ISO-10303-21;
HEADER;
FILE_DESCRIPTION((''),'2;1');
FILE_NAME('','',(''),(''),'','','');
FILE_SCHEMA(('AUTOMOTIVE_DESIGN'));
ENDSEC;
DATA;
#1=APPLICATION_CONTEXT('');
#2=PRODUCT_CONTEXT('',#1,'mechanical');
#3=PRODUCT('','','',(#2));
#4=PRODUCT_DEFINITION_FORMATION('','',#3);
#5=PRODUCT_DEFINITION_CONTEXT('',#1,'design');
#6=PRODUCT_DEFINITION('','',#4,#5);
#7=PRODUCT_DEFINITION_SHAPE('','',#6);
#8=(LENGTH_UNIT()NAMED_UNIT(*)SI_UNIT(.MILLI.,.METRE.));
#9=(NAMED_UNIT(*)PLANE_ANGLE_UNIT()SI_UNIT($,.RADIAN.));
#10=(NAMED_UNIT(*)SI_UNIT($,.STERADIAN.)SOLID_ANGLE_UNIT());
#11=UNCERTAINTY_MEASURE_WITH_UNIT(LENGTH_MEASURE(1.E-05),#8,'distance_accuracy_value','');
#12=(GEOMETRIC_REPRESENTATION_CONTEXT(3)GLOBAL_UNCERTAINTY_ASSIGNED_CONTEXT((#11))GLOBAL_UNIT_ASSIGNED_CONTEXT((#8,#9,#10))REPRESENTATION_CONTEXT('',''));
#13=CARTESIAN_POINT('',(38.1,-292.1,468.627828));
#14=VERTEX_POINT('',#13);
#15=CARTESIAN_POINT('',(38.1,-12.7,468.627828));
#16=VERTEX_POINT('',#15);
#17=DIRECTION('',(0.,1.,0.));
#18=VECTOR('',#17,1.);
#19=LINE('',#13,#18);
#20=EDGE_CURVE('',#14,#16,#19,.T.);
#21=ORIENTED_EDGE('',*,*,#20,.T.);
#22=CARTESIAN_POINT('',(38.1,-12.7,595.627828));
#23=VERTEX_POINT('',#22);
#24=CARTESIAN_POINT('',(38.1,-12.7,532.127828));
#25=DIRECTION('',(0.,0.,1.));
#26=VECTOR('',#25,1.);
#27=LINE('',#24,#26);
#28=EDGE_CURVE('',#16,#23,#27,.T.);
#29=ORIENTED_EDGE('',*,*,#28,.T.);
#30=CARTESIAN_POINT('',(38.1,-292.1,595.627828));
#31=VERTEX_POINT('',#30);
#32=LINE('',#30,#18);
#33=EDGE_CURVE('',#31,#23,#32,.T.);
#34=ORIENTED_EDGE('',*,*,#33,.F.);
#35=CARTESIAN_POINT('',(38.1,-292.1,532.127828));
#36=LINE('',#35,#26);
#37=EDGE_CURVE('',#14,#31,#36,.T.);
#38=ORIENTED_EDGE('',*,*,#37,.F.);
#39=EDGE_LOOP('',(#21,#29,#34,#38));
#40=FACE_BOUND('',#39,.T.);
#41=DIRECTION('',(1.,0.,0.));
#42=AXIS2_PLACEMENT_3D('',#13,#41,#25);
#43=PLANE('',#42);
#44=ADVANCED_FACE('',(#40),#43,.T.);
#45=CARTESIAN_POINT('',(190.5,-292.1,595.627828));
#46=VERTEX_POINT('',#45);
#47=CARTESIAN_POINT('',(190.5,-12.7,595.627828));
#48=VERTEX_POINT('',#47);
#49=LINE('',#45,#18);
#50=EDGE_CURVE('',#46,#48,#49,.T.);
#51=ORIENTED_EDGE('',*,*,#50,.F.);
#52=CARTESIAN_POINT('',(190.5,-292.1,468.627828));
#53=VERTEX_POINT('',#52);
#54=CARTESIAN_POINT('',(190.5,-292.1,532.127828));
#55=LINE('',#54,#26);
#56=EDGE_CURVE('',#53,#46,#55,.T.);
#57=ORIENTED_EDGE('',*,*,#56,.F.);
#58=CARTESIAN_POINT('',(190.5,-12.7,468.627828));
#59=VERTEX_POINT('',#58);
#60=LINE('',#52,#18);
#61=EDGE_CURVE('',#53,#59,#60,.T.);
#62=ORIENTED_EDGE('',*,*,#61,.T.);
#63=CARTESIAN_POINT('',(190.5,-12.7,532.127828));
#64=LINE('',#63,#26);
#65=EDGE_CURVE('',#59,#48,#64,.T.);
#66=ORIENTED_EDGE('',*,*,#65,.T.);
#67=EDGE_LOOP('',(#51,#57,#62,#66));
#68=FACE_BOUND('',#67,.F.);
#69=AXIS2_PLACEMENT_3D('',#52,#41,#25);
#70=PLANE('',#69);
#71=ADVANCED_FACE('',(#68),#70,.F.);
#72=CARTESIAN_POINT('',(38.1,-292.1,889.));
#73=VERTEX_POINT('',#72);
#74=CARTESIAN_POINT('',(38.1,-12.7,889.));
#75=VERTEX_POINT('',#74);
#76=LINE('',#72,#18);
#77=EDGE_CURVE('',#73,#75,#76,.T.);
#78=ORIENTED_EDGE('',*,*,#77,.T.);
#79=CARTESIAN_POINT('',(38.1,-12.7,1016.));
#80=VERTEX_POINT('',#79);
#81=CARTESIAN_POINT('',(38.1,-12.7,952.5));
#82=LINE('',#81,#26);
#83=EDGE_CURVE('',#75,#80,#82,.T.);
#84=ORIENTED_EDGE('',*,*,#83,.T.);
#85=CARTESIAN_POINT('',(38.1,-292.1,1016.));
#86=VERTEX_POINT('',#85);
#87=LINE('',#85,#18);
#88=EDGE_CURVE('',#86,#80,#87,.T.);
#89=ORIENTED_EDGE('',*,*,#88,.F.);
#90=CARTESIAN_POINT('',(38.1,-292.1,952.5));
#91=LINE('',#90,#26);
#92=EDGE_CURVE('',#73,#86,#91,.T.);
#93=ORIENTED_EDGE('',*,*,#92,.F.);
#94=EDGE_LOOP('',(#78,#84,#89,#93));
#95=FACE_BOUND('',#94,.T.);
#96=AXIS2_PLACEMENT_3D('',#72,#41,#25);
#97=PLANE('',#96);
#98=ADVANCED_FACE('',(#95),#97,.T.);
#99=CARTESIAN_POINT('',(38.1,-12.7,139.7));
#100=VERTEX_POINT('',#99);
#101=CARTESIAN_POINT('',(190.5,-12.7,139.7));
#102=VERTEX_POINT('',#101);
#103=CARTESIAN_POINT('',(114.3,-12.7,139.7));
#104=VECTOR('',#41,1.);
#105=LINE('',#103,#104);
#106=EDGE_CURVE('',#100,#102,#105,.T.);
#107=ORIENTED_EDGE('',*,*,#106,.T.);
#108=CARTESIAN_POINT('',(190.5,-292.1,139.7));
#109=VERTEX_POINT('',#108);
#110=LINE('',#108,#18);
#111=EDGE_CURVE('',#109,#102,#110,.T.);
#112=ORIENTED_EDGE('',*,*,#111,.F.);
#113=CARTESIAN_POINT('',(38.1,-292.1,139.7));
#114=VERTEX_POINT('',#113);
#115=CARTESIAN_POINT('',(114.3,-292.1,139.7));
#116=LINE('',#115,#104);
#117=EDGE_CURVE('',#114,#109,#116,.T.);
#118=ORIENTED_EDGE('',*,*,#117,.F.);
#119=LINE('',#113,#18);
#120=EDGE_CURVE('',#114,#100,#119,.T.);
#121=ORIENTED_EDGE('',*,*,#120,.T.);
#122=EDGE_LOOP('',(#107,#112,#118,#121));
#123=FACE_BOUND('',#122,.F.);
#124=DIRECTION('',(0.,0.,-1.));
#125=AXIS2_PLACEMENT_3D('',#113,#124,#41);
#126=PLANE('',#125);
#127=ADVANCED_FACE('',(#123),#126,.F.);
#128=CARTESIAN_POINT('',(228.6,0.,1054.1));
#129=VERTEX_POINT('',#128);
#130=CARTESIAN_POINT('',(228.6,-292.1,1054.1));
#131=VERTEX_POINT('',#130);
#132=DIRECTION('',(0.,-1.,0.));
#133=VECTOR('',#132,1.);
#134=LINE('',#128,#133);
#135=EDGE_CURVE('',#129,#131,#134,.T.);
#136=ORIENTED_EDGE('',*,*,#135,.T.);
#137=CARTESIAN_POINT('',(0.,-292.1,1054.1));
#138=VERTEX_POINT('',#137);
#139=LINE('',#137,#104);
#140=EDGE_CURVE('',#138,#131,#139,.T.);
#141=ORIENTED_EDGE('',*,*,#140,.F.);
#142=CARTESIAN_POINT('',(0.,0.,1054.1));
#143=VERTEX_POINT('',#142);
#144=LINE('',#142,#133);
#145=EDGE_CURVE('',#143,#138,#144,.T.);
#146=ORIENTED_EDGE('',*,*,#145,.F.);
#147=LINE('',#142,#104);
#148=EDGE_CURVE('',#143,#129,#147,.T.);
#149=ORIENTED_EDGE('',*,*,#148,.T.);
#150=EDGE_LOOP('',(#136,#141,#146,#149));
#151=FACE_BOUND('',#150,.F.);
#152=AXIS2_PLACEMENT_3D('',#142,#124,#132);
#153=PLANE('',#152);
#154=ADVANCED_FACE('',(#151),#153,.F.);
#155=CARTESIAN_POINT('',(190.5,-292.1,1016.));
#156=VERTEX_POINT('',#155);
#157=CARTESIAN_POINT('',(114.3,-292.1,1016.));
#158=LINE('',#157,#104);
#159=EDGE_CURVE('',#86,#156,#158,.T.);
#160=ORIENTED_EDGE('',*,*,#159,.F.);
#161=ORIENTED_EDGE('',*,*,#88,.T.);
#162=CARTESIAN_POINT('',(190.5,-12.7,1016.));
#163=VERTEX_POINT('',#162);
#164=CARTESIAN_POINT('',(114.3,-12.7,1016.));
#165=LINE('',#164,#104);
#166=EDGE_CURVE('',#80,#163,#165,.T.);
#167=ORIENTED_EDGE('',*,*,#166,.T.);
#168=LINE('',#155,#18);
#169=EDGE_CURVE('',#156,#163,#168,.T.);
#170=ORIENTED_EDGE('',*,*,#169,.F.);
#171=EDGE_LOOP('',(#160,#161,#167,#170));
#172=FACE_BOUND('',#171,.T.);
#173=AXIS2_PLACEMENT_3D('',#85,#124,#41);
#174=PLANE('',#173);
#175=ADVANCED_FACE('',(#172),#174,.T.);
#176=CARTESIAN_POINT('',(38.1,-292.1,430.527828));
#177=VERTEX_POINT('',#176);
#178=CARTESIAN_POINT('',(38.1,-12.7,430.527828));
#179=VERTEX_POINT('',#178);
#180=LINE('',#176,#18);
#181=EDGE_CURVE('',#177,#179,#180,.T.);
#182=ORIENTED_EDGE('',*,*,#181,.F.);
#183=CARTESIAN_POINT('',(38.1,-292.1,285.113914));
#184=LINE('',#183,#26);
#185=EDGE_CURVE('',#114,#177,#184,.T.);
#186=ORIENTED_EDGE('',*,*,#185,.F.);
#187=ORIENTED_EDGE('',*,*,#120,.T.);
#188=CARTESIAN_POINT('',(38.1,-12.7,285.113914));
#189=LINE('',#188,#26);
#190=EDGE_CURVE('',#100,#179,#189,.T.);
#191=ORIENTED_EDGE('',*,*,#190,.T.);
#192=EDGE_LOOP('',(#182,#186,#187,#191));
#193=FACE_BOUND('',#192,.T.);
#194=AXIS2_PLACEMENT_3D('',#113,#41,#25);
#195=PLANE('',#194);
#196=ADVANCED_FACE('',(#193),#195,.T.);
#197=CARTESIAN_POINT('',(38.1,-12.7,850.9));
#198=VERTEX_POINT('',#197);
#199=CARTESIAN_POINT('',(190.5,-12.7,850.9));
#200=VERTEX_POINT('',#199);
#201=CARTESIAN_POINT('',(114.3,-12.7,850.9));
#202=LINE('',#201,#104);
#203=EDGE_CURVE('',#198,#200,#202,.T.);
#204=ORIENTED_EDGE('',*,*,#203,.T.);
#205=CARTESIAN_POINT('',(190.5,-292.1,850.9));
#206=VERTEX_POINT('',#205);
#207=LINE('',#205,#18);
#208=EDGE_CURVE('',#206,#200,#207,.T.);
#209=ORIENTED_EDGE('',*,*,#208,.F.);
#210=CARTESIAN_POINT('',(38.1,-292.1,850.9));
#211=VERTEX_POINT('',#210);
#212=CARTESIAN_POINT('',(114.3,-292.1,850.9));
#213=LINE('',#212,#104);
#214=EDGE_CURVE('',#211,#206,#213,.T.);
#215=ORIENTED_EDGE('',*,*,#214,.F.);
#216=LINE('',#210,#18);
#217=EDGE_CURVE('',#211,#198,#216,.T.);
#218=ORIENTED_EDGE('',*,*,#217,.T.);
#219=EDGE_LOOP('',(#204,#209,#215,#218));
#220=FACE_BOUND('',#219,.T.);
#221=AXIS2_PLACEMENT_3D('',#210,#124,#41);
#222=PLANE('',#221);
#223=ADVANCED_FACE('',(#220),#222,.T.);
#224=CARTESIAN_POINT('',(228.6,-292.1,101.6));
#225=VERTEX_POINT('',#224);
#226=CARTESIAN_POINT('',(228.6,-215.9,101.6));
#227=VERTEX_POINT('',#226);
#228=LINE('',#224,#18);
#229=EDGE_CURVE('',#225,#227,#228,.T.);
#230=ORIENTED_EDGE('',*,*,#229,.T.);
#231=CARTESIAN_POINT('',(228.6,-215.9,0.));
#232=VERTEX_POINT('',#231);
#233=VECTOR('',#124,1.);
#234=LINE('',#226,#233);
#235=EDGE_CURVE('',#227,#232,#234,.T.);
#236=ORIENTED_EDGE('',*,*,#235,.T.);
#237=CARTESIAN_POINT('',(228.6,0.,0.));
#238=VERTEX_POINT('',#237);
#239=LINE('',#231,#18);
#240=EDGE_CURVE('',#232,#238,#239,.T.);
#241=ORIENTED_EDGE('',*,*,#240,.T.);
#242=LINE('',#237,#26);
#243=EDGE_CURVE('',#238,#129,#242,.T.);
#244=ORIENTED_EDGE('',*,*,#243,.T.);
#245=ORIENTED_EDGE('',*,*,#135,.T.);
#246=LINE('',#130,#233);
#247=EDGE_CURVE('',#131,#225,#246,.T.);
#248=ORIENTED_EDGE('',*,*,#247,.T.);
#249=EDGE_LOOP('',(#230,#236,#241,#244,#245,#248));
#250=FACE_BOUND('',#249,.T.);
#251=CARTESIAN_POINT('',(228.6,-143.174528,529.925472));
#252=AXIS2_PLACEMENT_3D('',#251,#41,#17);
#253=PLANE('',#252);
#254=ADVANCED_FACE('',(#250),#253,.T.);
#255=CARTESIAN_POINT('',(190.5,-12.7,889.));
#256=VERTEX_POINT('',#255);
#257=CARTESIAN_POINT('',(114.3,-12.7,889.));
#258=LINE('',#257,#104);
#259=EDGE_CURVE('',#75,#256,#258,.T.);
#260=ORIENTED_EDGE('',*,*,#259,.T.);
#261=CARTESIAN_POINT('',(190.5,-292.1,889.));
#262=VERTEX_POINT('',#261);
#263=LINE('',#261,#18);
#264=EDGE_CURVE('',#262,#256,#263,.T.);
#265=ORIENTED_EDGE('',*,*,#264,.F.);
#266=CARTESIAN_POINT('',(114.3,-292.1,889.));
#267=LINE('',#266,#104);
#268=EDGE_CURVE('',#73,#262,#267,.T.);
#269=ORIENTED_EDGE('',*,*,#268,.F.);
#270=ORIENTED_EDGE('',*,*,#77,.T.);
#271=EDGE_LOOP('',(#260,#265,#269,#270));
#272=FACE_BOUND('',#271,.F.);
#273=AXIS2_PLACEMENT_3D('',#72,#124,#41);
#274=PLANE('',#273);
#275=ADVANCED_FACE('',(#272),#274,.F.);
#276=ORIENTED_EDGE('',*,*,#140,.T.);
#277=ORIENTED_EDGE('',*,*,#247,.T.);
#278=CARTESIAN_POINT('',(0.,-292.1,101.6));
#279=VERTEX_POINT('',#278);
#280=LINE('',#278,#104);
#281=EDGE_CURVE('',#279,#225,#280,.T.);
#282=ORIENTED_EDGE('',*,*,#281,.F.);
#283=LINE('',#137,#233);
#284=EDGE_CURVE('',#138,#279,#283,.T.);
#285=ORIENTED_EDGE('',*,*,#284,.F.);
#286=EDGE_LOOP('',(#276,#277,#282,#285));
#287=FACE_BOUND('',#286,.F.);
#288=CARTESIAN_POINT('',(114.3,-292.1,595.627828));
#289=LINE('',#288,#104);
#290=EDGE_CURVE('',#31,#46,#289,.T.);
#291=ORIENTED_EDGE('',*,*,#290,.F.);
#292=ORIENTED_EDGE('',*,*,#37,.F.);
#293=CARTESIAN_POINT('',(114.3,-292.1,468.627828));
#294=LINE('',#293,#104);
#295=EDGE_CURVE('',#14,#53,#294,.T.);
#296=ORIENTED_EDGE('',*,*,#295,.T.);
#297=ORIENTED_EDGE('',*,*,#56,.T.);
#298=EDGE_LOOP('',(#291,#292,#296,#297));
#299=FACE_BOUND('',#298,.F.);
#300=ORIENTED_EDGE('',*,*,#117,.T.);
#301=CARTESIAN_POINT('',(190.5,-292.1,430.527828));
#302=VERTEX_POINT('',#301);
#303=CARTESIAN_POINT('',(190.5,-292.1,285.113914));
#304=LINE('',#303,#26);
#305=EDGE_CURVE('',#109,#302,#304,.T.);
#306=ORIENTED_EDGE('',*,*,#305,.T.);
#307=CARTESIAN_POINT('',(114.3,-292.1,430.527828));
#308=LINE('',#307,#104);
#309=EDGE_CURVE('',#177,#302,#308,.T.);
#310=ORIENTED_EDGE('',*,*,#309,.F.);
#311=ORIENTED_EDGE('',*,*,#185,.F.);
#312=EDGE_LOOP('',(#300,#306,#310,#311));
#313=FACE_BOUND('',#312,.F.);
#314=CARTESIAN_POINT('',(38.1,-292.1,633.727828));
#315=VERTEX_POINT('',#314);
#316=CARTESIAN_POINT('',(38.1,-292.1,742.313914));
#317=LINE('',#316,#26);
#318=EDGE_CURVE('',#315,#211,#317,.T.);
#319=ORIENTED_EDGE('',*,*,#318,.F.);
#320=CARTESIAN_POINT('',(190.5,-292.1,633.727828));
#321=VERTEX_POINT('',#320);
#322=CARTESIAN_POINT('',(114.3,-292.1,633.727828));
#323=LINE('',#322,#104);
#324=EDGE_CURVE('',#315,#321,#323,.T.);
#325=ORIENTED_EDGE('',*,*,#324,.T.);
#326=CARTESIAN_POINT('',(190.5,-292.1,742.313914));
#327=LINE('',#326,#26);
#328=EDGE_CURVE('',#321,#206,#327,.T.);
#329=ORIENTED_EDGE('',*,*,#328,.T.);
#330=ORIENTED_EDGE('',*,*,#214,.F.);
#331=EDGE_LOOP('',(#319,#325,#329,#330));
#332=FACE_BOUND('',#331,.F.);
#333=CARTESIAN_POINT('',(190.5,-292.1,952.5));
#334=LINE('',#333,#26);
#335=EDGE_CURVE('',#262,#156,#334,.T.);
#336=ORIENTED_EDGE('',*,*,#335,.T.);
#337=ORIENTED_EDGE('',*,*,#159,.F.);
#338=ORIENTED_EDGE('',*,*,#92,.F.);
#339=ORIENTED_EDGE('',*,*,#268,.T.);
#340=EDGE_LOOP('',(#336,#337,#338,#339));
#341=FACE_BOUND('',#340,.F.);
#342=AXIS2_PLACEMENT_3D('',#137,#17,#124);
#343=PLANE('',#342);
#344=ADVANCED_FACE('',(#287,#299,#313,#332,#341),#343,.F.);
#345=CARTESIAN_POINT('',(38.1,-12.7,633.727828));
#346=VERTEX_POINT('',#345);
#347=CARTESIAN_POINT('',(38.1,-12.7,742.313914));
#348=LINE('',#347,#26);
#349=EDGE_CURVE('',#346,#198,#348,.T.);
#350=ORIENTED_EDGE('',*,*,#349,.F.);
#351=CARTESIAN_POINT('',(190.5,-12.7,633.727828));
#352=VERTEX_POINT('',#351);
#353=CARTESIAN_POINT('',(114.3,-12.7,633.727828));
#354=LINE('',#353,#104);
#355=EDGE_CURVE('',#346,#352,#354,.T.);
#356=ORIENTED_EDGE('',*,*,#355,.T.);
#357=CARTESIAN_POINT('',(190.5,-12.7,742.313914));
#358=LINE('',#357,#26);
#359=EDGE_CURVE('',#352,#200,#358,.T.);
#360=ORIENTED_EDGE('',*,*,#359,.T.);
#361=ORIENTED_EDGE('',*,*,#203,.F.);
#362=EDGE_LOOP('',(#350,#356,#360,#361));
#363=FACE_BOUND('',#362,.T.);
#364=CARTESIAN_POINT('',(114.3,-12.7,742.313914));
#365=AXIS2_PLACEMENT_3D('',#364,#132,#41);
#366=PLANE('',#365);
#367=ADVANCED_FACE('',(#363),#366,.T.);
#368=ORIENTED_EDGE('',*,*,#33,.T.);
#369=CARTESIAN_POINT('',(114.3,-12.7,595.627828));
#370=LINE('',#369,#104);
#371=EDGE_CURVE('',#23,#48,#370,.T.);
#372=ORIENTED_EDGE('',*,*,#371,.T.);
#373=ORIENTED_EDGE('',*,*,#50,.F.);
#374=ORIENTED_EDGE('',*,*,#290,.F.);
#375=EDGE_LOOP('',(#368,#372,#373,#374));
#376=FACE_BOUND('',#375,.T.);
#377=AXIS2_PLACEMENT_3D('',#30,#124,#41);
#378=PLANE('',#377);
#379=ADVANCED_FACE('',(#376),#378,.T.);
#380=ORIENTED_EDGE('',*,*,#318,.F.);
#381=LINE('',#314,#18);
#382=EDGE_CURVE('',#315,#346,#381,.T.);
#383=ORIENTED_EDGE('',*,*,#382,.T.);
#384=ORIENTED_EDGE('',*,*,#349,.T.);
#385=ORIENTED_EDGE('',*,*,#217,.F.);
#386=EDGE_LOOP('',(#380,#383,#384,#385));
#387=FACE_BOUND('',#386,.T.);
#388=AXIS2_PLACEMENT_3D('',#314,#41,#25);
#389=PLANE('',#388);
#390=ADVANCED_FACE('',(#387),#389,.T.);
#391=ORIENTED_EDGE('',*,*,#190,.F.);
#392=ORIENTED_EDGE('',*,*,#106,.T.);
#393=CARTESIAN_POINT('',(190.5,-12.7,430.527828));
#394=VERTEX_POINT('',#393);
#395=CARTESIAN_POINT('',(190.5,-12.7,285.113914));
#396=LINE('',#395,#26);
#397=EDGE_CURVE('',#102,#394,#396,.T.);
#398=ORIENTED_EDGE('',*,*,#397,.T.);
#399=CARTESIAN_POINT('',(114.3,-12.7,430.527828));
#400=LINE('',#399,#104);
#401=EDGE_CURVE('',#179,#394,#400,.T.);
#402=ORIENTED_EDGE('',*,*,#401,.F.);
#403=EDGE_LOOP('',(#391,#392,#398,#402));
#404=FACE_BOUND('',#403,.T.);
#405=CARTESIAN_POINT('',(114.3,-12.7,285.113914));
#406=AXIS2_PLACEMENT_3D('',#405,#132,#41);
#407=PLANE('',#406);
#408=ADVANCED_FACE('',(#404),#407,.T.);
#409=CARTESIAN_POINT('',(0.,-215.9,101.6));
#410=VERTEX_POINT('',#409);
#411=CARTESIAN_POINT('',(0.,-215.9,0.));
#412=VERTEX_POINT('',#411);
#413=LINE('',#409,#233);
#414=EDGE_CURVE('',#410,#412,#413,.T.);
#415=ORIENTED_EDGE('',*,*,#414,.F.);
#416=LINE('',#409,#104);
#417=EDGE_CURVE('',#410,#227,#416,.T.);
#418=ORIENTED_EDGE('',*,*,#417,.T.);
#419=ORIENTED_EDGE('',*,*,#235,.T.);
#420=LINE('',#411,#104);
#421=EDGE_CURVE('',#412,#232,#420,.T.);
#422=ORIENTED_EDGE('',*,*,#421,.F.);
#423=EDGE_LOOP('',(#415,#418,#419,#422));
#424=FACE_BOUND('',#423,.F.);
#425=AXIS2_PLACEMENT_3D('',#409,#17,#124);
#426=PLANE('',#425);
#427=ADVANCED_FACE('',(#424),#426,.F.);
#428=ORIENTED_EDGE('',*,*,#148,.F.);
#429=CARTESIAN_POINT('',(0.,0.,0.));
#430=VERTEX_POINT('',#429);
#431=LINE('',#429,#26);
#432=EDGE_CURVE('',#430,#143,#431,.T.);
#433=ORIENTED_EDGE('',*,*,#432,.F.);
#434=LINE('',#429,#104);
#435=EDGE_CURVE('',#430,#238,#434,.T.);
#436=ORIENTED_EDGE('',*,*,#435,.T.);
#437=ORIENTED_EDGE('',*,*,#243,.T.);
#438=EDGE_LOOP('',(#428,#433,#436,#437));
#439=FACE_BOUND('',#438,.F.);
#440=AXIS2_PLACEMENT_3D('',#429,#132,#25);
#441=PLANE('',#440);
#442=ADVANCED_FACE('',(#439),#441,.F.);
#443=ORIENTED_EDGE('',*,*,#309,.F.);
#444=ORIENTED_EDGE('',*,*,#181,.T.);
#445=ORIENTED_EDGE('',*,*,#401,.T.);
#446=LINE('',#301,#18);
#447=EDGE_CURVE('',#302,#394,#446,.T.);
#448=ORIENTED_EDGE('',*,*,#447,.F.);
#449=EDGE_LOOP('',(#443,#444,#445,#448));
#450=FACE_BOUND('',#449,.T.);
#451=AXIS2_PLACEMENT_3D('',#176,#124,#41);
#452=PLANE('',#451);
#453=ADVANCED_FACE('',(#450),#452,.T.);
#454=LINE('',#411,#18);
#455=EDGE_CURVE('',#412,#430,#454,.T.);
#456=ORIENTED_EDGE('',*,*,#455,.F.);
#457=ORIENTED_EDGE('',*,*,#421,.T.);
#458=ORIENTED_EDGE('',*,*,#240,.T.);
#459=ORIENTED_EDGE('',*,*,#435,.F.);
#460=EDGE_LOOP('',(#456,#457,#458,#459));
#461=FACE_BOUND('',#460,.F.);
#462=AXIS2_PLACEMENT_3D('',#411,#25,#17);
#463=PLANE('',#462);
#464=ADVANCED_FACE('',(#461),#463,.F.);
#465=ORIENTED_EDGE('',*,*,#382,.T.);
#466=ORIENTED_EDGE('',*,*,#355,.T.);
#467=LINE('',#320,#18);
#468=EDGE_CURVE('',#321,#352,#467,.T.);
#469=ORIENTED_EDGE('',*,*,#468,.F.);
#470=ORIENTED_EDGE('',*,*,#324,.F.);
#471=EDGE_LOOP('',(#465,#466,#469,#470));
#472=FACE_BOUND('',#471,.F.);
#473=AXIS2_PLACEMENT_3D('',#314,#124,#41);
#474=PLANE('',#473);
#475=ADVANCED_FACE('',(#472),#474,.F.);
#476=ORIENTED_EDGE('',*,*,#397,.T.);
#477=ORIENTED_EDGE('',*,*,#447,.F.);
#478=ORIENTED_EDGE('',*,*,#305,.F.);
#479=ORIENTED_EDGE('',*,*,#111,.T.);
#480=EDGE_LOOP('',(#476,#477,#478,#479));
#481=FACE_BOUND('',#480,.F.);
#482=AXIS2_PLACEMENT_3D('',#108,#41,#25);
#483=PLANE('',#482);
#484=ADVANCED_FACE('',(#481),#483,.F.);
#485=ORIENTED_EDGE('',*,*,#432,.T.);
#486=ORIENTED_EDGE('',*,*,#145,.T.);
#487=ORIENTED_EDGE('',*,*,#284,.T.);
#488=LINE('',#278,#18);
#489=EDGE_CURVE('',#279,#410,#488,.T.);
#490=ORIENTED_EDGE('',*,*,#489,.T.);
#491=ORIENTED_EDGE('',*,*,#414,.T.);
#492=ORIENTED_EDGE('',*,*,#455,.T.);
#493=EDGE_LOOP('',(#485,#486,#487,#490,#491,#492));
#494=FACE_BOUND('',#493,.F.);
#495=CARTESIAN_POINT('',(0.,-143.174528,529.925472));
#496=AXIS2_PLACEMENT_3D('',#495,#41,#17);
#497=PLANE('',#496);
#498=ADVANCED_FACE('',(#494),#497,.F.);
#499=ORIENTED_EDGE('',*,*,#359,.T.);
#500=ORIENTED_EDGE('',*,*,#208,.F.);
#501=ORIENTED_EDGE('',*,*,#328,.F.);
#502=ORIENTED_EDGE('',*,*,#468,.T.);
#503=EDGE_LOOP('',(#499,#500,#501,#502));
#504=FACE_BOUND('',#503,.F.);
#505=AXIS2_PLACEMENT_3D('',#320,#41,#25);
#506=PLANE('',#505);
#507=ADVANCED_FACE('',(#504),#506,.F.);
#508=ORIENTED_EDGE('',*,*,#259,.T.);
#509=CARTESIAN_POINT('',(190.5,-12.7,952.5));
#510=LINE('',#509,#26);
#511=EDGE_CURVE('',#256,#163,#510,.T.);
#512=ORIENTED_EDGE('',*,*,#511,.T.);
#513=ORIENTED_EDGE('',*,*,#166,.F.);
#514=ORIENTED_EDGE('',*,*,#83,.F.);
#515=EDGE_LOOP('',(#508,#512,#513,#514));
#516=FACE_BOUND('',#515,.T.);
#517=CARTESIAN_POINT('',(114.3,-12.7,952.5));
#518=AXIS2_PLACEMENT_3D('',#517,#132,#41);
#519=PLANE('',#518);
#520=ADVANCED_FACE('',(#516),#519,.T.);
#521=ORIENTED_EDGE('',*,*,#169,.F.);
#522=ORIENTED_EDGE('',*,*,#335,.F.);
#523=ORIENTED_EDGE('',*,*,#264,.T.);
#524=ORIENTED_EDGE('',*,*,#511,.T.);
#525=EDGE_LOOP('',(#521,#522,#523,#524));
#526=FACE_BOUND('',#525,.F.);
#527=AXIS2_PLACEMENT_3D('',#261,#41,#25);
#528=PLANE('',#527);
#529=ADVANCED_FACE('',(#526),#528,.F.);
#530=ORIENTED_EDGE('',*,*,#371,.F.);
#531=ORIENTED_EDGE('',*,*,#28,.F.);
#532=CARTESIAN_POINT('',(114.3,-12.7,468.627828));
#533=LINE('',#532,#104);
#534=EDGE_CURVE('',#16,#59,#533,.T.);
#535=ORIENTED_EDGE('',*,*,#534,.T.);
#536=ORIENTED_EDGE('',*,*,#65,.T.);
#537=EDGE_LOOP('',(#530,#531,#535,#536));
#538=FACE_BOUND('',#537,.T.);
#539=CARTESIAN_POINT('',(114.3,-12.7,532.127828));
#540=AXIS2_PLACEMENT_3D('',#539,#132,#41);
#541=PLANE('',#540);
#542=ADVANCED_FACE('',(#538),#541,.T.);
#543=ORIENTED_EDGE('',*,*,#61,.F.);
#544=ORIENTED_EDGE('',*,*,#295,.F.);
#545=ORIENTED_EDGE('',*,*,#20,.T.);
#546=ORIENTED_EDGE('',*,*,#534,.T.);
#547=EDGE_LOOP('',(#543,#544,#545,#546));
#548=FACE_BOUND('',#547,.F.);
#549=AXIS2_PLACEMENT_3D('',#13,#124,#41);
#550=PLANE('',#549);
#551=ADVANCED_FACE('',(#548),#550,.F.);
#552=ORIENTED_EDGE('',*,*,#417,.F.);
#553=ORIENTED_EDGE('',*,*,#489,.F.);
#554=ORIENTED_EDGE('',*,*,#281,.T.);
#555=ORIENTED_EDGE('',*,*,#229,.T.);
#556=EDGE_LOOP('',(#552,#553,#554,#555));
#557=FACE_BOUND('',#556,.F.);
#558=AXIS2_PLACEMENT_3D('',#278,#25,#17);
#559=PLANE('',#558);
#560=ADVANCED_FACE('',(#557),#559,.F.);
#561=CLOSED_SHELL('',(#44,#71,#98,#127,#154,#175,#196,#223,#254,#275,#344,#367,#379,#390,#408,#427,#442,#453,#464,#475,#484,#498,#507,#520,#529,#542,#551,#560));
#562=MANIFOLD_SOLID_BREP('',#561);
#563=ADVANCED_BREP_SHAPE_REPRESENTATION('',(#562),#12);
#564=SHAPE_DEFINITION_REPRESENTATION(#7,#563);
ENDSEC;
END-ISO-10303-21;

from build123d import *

# Parameters (mm, degrees)
F1_DEPTH = 228.6
F2_W     = 152.4
F2_H     = 127
F2_H_2   = 217.1721715927
F2_H_3   = 290.8278284073
F3_DEPTH = 279.4


# Not quite as in the source:
# - a feature names something its author has since deleted; it is built from what else it names


with BuildPart() as f1:
    # F0 (on Right) → F1 (new body)
    with BuildSketch(Plane.YZ):
        Polygon((-215.9, 0), (0, 0), (0, 1054.1), (-292.1, 1054.1), (-292.1, 101.6), (-215.9, 101.6), align=None)
    extrude(amount=F1_DEPTH)

    # F2 (on face) → F3 (cut)
    with BuildSketch(Plane.XZ.offset(292.1)):
        with Locations((114.3, 952.5)):
            Rectangle(F2_W, F2_H)
        with Locations((114.3, 742.3139142036)):
            Rectangle(F2_W, F2_H_2)
        with Locations((114.3, 532.1278284073)):
            Rectangle(F2_W, F2_H)
        with Locations((114.3, 285.1139142036)):
            Rectangle(F2_W, F2_H_3)
    extrude(amount=-F3_DEPTH, mode=Mode.SUBTRACT)


solid = f1.part
